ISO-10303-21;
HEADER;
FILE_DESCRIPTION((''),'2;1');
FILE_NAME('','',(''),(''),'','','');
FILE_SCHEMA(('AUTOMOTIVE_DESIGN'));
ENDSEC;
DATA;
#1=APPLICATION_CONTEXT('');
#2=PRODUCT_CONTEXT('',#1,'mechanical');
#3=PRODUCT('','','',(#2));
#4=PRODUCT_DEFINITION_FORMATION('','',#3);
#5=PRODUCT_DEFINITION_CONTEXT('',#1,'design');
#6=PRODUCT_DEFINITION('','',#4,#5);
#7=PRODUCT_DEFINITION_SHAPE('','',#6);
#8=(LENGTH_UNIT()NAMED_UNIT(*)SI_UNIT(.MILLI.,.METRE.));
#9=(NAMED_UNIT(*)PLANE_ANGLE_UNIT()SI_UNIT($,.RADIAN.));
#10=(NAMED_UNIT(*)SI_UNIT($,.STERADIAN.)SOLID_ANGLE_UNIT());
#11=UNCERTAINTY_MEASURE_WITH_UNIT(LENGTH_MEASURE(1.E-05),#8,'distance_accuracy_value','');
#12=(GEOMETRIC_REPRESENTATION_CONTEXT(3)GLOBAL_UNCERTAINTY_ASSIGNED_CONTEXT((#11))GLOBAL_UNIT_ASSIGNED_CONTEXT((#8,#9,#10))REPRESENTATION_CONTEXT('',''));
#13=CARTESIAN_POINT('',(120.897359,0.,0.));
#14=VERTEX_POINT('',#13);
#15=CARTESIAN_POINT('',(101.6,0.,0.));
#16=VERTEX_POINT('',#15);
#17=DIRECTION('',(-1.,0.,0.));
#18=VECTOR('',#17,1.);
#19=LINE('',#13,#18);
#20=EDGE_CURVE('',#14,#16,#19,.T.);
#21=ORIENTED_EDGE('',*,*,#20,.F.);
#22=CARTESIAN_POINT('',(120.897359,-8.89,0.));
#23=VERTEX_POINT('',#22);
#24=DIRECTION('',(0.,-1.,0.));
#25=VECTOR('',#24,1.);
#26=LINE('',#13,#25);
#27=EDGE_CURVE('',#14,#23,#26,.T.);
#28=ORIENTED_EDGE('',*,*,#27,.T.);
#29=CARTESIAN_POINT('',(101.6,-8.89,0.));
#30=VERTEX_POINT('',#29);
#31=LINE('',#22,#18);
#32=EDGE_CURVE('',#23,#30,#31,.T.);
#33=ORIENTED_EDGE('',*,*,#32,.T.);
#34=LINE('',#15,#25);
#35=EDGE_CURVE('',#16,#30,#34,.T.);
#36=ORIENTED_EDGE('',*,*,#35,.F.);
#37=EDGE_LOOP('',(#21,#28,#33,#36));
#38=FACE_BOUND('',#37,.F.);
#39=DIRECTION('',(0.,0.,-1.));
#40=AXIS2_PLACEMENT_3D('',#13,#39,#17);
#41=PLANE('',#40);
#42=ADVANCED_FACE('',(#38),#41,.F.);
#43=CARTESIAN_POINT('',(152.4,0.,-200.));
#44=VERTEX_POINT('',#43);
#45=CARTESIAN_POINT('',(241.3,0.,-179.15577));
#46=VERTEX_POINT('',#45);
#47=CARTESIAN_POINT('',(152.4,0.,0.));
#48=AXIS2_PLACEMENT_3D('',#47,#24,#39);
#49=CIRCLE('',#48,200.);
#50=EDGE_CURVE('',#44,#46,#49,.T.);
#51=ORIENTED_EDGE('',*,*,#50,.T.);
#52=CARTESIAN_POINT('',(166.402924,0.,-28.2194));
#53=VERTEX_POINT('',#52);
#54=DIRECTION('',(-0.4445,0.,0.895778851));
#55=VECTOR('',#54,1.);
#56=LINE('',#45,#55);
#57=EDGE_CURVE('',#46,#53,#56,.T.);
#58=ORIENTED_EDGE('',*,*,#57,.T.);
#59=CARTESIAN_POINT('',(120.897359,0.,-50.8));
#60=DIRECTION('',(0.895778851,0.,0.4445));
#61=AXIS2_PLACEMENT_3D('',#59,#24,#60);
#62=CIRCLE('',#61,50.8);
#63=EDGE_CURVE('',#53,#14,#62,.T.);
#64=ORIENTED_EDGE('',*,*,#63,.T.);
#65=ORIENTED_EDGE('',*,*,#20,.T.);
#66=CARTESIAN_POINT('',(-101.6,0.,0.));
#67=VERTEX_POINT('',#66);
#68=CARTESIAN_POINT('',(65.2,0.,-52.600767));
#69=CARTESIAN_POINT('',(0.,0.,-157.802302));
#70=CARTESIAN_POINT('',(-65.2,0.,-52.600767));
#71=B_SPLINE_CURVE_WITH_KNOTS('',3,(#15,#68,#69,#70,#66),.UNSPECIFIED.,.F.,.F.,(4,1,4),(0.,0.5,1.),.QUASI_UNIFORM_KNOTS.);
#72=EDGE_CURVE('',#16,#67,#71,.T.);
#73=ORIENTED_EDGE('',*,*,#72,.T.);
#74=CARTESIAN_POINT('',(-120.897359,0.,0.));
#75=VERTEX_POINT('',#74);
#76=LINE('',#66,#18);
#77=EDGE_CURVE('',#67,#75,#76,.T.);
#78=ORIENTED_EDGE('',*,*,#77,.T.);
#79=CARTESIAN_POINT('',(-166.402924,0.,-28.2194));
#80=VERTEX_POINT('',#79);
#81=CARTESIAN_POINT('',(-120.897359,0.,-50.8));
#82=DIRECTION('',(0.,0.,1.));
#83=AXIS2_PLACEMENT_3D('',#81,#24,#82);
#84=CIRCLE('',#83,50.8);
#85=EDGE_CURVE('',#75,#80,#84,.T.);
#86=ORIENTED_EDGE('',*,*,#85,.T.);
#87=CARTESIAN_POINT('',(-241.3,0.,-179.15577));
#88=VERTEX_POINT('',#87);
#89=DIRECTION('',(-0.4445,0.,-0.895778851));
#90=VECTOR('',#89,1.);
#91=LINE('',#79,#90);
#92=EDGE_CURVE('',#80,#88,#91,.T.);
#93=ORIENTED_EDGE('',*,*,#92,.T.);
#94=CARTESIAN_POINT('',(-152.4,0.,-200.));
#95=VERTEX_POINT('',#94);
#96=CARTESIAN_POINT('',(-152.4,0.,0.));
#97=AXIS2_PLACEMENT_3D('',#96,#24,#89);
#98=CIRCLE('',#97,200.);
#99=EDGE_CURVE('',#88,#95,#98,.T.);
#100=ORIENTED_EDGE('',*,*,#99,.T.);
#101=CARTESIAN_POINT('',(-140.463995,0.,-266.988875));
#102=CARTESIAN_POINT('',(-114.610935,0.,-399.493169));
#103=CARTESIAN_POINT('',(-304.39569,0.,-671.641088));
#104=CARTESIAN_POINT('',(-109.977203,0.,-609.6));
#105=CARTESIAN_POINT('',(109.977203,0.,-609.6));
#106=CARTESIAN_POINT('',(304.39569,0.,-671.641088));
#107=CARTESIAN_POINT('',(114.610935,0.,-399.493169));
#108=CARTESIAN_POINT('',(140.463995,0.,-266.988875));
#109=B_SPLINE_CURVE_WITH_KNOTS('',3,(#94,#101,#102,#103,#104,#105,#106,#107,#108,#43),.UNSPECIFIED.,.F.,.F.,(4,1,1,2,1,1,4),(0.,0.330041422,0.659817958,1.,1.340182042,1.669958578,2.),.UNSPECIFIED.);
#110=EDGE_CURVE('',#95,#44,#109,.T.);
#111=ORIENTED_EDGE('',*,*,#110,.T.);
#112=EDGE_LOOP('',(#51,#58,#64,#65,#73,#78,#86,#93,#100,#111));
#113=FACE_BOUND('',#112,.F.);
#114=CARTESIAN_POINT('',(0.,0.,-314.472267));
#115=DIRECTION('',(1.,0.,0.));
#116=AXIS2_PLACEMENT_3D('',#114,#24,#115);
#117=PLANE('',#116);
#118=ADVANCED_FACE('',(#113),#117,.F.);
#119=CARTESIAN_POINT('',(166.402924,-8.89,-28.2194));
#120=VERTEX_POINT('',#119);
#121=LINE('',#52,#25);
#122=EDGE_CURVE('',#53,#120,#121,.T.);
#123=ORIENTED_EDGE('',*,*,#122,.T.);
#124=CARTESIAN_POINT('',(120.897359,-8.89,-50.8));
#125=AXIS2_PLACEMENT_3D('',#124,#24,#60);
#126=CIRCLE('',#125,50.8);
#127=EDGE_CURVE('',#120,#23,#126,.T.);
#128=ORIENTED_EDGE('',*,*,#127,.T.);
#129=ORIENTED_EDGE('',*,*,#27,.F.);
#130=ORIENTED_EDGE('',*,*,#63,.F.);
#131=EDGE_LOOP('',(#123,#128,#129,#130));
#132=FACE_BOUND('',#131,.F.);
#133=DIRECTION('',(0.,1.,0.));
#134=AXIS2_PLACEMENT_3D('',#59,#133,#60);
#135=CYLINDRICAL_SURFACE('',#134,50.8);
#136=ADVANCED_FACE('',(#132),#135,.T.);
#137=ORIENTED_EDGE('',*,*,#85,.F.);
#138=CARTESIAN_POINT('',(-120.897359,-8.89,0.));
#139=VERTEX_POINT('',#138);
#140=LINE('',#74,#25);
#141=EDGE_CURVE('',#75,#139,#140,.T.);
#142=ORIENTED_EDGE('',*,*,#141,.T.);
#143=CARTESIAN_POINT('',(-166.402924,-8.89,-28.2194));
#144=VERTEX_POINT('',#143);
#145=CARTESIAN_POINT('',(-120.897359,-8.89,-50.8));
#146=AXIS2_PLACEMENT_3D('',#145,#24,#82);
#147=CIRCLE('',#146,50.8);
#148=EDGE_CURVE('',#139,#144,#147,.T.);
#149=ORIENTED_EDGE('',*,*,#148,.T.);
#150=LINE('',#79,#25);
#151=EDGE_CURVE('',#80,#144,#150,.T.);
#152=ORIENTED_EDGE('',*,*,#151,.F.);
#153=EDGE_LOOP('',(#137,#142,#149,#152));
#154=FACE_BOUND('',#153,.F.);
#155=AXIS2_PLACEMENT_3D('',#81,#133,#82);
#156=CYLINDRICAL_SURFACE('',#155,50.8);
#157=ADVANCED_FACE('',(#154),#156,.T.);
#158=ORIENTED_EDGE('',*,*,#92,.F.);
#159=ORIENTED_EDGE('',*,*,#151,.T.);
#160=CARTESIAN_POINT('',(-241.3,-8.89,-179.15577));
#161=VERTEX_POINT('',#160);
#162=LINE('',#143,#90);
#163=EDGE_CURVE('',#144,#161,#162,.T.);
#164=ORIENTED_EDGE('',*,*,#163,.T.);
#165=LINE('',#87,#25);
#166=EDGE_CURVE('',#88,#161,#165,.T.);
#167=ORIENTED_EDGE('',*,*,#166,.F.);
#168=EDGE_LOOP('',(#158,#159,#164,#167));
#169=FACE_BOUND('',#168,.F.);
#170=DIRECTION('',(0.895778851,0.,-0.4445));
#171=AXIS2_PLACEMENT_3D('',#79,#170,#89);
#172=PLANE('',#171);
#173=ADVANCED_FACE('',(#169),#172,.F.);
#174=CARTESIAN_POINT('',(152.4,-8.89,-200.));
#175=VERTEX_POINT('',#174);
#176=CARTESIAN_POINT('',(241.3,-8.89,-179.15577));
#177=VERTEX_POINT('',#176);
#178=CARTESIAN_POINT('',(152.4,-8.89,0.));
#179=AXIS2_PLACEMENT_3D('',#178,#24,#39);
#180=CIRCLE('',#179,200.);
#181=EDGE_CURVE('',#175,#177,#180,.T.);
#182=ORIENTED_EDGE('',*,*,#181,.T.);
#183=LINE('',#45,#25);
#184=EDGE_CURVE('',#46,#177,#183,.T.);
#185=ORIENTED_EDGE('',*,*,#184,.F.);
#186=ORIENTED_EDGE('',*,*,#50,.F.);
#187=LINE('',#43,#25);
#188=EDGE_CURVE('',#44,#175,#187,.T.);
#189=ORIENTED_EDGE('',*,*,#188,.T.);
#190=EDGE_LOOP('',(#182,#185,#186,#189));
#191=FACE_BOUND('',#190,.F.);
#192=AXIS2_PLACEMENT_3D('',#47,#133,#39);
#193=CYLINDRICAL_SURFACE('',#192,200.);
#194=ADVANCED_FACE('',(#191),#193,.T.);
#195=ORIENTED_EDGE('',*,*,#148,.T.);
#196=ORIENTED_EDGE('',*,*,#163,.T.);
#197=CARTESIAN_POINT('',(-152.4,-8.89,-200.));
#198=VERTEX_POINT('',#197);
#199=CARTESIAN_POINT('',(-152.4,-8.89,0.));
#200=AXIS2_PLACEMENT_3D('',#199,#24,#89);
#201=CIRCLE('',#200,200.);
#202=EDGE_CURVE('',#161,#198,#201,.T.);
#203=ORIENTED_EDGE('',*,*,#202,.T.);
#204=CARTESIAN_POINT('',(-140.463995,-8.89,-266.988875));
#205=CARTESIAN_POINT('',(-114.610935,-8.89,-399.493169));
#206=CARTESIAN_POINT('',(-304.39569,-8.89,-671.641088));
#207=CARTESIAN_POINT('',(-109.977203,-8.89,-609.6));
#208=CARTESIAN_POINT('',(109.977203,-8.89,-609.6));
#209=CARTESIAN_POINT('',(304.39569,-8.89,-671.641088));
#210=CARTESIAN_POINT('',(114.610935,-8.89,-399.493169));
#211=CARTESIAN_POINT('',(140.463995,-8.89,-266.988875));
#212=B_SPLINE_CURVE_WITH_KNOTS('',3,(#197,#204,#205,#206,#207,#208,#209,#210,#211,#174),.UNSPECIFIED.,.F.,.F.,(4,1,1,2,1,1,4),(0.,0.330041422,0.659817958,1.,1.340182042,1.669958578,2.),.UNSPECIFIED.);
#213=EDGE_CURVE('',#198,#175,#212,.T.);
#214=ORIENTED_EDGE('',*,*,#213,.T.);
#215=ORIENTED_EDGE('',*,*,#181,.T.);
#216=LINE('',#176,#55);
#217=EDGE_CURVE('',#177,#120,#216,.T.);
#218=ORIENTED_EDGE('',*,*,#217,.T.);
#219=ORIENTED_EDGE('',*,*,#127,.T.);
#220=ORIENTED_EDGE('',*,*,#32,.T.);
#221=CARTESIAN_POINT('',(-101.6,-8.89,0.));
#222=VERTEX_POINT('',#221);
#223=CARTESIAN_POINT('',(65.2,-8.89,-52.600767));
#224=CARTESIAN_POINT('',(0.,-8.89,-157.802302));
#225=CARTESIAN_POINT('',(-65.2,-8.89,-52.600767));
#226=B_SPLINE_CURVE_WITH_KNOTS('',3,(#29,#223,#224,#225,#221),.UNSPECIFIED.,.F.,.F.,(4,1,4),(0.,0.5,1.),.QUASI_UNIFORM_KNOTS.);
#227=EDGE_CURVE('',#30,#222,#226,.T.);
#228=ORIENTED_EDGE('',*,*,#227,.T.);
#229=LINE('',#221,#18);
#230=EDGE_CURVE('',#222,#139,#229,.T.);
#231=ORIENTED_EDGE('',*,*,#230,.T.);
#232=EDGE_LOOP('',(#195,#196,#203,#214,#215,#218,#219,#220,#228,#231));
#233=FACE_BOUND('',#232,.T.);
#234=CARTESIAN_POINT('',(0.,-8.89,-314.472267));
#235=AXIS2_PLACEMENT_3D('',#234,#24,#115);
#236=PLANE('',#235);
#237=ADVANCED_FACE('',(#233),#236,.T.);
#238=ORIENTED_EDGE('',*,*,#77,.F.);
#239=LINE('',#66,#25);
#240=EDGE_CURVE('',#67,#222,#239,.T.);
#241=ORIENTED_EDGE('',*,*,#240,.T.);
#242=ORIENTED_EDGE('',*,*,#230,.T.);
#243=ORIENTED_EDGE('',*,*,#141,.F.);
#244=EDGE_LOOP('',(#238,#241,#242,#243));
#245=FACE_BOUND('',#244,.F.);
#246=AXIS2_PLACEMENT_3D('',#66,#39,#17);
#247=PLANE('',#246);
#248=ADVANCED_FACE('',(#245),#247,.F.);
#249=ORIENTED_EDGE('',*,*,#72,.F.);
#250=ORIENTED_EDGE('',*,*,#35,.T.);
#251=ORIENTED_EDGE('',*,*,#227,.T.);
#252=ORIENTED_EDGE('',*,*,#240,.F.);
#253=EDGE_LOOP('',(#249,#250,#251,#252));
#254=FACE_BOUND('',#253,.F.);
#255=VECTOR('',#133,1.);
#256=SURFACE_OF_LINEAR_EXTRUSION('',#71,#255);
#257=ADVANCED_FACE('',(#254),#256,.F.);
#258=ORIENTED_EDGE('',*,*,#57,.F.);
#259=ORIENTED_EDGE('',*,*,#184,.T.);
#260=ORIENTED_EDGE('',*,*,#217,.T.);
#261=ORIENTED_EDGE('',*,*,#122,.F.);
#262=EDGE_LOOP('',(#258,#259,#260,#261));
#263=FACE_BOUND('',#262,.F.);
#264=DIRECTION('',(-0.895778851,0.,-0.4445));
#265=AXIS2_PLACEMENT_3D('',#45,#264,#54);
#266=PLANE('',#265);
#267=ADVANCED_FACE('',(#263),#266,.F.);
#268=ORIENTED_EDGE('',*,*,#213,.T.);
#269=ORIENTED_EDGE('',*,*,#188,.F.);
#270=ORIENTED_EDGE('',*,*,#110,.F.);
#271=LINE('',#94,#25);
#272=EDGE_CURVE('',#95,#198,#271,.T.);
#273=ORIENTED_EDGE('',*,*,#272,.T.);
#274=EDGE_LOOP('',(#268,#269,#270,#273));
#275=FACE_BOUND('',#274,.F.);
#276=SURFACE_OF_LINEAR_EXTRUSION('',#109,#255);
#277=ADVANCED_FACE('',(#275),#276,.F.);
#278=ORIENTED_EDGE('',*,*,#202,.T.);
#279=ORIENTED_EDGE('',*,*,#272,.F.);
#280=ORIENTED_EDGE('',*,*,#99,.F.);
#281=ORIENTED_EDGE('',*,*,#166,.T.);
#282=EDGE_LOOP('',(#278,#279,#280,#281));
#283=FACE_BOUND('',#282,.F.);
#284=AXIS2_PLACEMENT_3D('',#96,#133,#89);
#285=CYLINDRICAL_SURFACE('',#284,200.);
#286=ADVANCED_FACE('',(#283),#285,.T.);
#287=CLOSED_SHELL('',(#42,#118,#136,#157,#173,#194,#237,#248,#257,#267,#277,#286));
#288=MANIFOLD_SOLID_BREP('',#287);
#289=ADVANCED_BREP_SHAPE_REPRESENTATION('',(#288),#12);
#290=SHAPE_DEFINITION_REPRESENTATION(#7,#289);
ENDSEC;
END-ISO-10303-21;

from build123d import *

# Parameters (mm, degrees)
F1_DEPTH = 8.89


with BuildPart() as f1:
    # F0 (on Front) → F1 (new body)
    with BuildSketch(Plane.XZ):
        with BuildLine():
            ThreePointArc((-120.8973585091, 0), (-147.6699706341, -7.6274712346), (-166.4029241427, -28.2194))
            Line((-166.4029241427, -28.2194), (-241.3, -179.1557702113))
            ThreePointArc((-241.3, -179.1557702113), (-198.0554813672, -194.7192261209), (-152.4, -200))
            add(Edge.make_bspline(
                [(-152.4, -200), (-140.4639950109, -266.9888747602), (-114.6109354207, -399.4931685645), (-304.3956902598, -671.6410884783), (-109.977203101, -609.6), (0, -609.6)],
                knots=[0, 0, 0, 0, 0.3300414219, 0.6598179581, 1, 1, 1, 1], degree=3))
            add(Edge.make_bspline(
                [(152.4, -200), (140.4639950109, -266.9888747602), (114.6109354207, -399.4931685645), (304.3956902598, -671.6410884783), (109.977203101, -609.6), (0, -609.6)],
                knots=[0, 0, 0, 0, 0.3300414219, 0.6598179581, 1, 1, 1, 1], degree=3))
            ThreePointArc((152.4, -200), (198.0554813672, -194.7192261209), (241.3, -179.1557702113))
            Line((241.3, -179.1557702113), (166.4029241427, -28.2194))
            ThreePointArc((166.4029241427, -28.2194), (147.6699706341, -7.6274712346), (120.8973585091, 0))
            Line((120.8973585091, 0), (101.6, 0))
            add(Edge.make_bspline(
                [(101.6, 0), (65.2, -52.6007674634), (0, -157.8023023903), (-65.2, -52.6007674634), (-101.6, 0)],
                knots=[0, 0, 0, 0, 0.5, 1, 1, 1, 1], degree=3))
            Line((-101.6, 0), (-120.8973585091, 0))
        make_face()
    extrude(amount=F1_DEPTH)


solid = f1.part
